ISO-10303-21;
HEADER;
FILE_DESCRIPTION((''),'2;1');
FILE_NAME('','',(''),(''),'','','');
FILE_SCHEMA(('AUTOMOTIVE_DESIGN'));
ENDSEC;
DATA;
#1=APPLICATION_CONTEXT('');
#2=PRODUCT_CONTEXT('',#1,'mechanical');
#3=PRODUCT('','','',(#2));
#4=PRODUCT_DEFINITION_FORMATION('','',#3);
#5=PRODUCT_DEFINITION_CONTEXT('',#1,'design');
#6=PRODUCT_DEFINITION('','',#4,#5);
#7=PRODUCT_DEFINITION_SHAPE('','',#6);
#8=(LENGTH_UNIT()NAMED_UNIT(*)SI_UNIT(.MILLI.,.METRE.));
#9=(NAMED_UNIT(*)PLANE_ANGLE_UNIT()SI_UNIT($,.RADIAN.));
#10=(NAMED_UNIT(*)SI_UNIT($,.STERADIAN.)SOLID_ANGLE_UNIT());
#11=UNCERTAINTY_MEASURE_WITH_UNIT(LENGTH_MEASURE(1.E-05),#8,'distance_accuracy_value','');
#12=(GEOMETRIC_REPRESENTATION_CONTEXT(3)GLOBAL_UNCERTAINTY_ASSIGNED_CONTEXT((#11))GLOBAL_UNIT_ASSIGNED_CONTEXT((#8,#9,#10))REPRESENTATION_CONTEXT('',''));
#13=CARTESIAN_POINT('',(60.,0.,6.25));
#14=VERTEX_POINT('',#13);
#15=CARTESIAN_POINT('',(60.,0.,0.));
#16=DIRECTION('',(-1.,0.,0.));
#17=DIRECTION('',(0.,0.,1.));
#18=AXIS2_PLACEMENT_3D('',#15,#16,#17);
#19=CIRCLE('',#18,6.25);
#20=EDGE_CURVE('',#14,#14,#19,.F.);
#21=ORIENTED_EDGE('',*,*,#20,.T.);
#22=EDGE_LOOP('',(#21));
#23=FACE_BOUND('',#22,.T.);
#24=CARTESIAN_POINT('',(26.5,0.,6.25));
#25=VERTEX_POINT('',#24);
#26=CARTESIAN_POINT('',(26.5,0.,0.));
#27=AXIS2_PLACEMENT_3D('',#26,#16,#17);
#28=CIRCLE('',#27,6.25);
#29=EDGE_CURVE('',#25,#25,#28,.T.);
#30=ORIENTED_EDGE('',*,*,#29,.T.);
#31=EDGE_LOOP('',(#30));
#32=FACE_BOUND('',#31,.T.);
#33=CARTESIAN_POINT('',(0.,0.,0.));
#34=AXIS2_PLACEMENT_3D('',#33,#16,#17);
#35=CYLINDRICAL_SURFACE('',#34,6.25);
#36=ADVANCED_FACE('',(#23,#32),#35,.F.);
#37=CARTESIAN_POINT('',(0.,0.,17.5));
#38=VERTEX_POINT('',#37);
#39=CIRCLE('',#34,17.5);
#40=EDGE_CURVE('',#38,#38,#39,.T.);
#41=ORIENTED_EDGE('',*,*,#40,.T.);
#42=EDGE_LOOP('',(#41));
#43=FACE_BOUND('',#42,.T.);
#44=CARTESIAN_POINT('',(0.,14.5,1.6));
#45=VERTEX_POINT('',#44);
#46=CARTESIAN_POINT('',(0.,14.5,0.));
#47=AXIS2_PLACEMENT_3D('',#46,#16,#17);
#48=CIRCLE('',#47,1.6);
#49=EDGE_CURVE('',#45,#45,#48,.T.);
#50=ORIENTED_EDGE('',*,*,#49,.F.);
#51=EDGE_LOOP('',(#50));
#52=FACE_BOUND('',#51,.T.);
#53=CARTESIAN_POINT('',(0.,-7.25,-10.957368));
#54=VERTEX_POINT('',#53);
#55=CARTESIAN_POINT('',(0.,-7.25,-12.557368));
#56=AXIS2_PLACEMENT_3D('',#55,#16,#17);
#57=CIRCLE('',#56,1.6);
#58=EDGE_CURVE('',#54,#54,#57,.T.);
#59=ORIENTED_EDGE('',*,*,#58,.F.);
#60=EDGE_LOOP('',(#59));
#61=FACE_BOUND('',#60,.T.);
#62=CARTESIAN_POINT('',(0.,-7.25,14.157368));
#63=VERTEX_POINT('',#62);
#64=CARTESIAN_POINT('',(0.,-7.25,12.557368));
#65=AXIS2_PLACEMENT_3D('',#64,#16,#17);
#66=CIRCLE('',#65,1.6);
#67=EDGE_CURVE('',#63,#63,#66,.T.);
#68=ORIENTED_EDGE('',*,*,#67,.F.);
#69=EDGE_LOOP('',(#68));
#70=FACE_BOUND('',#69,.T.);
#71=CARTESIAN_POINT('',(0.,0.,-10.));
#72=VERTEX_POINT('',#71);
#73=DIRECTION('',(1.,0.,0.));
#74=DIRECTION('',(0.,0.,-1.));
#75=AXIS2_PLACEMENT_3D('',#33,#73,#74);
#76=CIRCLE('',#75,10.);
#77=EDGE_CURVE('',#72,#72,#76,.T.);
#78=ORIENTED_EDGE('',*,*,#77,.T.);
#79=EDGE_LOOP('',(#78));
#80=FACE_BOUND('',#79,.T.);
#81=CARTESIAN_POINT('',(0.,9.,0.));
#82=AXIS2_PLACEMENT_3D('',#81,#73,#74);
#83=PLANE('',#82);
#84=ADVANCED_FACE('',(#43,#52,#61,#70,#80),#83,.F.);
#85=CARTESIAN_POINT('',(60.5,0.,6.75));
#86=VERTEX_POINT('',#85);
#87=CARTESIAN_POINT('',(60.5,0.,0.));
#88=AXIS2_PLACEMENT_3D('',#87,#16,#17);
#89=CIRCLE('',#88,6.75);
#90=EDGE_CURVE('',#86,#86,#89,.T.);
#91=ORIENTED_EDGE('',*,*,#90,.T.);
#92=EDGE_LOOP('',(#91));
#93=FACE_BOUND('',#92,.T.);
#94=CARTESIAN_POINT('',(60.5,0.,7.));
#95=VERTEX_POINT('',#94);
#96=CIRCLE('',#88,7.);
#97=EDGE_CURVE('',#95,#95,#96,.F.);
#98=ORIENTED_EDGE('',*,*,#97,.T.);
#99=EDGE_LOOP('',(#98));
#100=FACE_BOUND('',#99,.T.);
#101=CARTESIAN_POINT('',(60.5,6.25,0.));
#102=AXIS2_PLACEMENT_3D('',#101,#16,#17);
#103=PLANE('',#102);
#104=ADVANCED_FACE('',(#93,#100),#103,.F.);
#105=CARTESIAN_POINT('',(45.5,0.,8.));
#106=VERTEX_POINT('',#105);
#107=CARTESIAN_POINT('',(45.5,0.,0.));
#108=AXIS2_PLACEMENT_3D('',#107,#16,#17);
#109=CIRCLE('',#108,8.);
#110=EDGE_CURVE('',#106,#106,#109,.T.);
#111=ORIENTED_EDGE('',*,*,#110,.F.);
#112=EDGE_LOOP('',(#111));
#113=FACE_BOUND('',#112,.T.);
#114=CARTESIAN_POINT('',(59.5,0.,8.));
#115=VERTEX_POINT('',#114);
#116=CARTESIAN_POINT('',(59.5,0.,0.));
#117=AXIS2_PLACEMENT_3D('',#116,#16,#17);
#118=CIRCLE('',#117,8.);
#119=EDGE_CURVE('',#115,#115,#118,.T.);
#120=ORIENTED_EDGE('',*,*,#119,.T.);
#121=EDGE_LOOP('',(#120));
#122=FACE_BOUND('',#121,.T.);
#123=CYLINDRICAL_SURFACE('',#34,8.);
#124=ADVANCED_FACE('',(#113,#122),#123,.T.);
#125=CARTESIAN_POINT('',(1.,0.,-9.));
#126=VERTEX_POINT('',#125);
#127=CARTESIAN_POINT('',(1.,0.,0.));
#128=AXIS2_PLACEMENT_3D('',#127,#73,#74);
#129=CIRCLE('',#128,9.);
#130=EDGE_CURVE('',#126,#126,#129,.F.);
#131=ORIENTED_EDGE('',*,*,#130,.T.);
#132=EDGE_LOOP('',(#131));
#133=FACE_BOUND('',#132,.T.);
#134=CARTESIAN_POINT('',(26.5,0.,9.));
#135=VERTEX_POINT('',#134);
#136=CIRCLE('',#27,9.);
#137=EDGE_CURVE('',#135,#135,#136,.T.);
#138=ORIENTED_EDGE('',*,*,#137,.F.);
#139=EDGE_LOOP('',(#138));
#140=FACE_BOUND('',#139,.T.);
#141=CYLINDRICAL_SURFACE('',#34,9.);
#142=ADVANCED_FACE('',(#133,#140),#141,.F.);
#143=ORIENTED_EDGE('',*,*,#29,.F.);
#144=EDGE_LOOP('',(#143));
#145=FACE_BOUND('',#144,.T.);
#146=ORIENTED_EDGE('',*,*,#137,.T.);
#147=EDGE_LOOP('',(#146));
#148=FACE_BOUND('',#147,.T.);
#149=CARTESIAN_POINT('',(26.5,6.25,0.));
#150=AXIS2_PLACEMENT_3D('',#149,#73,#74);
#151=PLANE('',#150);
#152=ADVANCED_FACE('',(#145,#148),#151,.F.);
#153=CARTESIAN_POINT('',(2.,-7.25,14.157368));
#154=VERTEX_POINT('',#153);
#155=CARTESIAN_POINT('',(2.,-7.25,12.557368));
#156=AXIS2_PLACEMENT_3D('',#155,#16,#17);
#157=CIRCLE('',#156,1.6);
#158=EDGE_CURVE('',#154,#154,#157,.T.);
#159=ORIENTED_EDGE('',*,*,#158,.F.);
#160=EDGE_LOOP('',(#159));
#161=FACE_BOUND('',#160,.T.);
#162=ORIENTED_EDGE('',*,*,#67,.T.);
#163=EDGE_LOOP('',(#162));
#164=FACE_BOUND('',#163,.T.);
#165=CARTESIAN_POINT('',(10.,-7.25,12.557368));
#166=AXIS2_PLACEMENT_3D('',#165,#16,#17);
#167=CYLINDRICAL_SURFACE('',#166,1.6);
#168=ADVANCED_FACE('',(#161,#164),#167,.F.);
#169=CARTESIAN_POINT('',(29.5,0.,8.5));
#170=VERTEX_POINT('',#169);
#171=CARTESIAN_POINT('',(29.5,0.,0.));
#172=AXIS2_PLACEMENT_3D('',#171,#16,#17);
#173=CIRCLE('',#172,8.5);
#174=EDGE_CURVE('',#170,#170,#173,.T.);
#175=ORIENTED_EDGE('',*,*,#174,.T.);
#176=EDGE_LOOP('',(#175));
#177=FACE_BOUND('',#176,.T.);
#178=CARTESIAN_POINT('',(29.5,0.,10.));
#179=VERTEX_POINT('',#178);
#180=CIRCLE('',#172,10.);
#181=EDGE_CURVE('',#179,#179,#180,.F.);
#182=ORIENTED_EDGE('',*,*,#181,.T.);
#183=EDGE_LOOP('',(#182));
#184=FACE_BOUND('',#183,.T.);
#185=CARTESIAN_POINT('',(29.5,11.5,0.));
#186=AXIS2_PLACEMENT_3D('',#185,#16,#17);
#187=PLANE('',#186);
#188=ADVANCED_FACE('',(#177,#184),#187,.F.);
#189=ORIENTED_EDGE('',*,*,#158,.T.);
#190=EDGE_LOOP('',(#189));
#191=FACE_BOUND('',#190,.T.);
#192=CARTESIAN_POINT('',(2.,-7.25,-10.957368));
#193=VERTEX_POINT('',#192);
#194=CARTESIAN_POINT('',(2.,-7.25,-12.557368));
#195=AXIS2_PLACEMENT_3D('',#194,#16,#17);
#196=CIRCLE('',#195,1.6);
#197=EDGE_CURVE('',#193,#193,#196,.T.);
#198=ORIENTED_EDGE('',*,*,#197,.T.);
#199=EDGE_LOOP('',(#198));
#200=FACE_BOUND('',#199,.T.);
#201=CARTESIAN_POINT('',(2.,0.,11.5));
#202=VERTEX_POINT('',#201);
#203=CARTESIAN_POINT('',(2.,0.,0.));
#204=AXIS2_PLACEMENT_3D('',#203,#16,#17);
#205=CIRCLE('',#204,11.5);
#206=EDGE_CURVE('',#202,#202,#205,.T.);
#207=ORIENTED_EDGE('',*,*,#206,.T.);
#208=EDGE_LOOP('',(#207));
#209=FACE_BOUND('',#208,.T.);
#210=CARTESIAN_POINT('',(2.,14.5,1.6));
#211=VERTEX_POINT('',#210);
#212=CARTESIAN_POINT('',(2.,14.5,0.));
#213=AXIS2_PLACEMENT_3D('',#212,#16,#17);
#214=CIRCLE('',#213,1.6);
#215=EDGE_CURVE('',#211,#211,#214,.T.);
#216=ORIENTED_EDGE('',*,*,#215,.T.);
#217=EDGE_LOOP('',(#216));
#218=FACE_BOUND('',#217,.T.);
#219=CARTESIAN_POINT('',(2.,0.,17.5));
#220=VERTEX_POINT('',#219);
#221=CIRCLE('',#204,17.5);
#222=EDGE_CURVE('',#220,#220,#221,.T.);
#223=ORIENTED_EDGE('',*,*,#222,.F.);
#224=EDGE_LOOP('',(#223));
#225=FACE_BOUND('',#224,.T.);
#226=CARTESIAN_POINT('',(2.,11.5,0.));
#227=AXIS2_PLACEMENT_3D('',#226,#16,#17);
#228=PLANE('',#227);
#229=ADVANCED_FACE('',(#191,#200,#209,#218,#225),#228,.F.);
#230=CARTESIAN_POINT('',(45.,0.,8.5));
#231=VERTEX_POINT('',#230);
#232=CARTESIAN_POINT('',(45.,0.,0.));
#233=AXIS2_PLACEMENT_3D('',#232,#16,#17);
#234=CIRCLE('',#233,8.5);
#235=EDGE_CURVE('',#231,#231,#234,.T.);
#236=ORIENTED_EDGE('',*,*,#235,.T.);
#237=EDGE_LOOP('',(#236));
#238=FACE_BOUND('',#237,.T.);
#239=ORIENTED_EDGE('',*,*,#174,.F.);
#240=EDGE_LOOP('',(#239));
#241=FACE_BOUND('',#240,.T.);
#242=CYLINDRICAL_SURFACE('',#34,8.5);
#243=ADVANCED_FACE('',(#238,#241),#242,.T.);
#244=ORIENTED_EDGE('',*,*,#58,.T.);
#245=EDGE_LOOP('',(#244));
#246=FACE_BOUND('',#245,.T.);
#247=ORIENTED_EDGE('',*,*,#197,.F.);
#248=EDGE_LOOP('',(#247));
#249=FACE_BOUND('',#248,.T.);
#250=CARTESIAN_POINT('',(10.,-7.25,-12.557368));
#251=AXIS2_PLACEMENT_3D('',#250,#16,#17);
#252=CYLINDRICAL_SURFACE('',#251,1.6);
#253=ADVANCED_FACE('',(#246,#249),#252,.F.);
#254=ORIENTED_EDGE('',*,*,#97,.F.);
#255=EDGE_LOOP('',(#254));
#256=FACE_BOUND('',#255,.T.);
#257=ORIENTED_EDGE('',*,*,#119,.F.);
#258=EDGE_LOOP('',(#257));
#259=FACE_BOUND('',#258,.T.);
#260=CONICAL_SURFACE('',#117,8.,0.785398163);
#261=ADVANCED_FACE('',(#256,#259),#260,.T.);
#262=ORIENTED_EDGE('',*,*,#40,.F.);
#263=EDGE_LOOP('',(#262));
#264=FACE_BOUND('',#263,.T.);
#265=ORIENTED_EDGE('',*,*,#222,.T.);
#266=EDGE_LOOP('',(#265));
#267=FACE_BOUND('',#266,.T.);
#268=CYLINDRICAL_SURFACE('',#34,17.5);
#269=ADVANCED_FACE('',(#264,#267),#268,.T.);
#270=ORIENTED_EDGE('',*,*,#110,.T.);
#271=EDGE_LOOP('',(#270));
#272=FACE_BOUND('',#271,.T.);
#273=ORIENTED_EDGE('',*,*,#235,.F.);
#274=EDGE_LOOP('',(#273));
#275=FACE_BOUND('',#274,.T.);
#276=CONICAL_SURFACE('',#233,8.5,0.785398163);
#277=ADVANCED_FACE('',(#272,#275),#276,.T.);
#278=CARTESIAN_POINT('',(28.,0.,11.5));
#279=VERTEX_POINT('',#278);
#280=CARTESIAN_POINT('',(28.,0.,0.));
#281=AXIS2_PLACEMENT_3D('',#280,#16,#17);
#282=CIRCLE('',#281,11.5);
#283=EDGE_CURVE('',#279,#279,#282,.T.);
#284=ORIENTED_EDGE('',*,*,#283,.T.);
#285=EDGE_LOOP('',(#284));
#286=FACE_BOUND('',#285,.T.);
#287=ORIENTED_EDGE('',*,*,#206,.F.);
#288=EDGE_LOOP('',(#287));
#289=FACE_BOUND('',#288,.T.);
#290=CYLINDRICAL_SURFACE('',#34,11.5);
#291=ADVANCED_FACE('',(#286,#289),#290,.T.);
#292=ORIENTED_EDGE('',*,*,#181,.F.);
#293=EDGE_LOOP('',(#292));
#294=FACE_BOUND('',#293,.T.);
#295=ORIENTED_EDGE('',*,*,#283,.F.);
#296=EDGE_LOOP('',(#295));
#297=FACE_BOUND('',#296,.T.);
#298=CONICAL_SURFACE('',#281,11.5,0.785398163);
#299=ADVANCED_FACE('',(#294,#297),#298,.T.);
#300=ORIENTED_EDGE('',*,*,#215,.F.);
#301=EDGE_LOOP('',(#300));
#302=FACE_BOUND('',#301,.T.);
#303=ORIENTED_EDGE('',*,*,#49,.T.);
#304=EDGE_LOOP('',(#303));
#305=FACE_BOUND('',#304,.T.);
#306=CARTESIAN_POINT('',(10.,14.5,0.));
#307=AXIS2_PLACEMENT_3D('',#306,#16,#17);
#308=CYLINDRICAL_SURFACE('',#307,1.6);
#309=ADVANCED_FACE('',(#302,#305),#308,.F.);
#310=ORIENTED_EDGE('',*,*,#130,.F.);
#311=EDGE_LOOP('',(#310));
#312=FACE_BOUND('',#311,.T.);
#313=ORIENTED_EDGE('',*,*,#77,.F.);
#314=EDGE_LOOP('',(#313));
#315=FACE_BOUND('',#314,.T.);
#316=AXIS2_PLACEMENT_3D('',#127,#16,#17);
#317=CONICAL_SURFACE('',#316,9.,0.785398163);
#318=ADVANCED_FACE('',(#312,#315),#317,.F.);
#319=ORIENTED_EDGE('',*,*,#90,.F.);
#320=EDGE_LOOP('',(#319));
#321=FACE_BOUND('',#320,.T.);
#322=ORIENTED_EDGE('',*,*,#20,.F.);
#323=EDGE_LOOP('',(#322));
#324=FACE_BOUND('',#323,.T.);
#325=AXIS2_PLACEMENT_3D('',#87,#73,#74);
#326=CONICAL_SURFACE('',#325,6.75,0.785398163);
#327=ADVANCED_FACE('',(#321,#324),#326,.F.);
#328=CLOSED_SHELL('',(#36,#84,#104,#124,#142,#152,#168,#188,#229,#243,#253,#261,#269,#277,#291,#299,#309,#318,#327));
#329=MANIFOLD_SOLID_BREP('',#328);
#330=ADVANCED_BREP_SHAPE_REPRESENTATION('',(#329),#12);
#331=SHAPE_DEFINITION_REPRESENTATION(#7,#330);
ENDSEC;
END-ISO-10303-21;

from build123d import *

# Parameters (mm, degrees)
CHAMFER_1_SIZE      = 1.5
CHAMFER_2_SIZE      = 1
CHAMFER_3_SIZE      = 1
CHAMFER_4_SIZE      = 0.5
SKETCH_2_R          = 1.6
CUT_EXTRUDE_1_DEPTH = 10


with BuildPart() as part:
    # Эскиз1 → Повернуть1 (revolve)
    with BuildSketch(Plane.XY, mode=Mode.PRIVATE) as revolve_1_sk:
        Polygon((26.5, 6.25), (26.5, 9), (0, 9), (0, 17.5), (2, 17.5), (2, 11.5), (29.5, 11.5), (29.5, 8.5), (45.5, 8.5), (45.5, 8), (60.5, 8), (60.5, 6.25), align=None)
    revolve(revolve_1_sk.sketch.rotate(Axis((0, 0, 0), (1, 0, 0)), 90), axis=Axis((0, 0, 0), (1, 0, 0)))

    # Фаска1
    chamfer_1_edges = [part.edges().sort_by_distance(p)[0] for p in [
        (29.5, 0, -11.5),
    ]]
    chamfer(chamfer_1_edges, length=CHAMFER_1_SIZE)

    # Фаска2
    chamfer_2_edges = [part.edges().sort_by_distance(p)[0] for p in [
        (0, 0, -9),
    ]]
    chamfer(chamfer_2_edges, length=CHAMFER_2_SIZE)

    # Фаска3
    chamfer_3_edges = [part.edges().sort_by_distance(p)[0] for p in [
        (60.5, 0, -8),
    ]]
    chamfer(chamfer_3_edges, length=CHAMFER_3_SIZE)

    # Фаска4
    chamfer_4_edges = [part.edges().sort_by_distance(p)[0] for p in [
        (45.5, 0, -8.5),
        (60.5, 0, -6.25),
    ]]
    chamfer(chamfer_4_edges, length=CHAMFER_4_SIZE - 0.0001)  # a hair under: the kernel refuses the full size

    # Эскиз2 → Вырез-Вытянуть1 (cut)
    with BuildSketch(Plane.ZY):
        with Locations((0, 14.5)):
            Circle(SKETCH_2_R)
        with Locations((12.557368355, -7.25)):
            Circle(SKETCH_2_R)
        with Locations((-12.557368355, -7.25)):
            Circle(SKETCH_2_R)
    extrude(amount=-CUT_EXTRUDE_1_DEPTH, mode=Mode.SUBTRACT)


solid = part.part
